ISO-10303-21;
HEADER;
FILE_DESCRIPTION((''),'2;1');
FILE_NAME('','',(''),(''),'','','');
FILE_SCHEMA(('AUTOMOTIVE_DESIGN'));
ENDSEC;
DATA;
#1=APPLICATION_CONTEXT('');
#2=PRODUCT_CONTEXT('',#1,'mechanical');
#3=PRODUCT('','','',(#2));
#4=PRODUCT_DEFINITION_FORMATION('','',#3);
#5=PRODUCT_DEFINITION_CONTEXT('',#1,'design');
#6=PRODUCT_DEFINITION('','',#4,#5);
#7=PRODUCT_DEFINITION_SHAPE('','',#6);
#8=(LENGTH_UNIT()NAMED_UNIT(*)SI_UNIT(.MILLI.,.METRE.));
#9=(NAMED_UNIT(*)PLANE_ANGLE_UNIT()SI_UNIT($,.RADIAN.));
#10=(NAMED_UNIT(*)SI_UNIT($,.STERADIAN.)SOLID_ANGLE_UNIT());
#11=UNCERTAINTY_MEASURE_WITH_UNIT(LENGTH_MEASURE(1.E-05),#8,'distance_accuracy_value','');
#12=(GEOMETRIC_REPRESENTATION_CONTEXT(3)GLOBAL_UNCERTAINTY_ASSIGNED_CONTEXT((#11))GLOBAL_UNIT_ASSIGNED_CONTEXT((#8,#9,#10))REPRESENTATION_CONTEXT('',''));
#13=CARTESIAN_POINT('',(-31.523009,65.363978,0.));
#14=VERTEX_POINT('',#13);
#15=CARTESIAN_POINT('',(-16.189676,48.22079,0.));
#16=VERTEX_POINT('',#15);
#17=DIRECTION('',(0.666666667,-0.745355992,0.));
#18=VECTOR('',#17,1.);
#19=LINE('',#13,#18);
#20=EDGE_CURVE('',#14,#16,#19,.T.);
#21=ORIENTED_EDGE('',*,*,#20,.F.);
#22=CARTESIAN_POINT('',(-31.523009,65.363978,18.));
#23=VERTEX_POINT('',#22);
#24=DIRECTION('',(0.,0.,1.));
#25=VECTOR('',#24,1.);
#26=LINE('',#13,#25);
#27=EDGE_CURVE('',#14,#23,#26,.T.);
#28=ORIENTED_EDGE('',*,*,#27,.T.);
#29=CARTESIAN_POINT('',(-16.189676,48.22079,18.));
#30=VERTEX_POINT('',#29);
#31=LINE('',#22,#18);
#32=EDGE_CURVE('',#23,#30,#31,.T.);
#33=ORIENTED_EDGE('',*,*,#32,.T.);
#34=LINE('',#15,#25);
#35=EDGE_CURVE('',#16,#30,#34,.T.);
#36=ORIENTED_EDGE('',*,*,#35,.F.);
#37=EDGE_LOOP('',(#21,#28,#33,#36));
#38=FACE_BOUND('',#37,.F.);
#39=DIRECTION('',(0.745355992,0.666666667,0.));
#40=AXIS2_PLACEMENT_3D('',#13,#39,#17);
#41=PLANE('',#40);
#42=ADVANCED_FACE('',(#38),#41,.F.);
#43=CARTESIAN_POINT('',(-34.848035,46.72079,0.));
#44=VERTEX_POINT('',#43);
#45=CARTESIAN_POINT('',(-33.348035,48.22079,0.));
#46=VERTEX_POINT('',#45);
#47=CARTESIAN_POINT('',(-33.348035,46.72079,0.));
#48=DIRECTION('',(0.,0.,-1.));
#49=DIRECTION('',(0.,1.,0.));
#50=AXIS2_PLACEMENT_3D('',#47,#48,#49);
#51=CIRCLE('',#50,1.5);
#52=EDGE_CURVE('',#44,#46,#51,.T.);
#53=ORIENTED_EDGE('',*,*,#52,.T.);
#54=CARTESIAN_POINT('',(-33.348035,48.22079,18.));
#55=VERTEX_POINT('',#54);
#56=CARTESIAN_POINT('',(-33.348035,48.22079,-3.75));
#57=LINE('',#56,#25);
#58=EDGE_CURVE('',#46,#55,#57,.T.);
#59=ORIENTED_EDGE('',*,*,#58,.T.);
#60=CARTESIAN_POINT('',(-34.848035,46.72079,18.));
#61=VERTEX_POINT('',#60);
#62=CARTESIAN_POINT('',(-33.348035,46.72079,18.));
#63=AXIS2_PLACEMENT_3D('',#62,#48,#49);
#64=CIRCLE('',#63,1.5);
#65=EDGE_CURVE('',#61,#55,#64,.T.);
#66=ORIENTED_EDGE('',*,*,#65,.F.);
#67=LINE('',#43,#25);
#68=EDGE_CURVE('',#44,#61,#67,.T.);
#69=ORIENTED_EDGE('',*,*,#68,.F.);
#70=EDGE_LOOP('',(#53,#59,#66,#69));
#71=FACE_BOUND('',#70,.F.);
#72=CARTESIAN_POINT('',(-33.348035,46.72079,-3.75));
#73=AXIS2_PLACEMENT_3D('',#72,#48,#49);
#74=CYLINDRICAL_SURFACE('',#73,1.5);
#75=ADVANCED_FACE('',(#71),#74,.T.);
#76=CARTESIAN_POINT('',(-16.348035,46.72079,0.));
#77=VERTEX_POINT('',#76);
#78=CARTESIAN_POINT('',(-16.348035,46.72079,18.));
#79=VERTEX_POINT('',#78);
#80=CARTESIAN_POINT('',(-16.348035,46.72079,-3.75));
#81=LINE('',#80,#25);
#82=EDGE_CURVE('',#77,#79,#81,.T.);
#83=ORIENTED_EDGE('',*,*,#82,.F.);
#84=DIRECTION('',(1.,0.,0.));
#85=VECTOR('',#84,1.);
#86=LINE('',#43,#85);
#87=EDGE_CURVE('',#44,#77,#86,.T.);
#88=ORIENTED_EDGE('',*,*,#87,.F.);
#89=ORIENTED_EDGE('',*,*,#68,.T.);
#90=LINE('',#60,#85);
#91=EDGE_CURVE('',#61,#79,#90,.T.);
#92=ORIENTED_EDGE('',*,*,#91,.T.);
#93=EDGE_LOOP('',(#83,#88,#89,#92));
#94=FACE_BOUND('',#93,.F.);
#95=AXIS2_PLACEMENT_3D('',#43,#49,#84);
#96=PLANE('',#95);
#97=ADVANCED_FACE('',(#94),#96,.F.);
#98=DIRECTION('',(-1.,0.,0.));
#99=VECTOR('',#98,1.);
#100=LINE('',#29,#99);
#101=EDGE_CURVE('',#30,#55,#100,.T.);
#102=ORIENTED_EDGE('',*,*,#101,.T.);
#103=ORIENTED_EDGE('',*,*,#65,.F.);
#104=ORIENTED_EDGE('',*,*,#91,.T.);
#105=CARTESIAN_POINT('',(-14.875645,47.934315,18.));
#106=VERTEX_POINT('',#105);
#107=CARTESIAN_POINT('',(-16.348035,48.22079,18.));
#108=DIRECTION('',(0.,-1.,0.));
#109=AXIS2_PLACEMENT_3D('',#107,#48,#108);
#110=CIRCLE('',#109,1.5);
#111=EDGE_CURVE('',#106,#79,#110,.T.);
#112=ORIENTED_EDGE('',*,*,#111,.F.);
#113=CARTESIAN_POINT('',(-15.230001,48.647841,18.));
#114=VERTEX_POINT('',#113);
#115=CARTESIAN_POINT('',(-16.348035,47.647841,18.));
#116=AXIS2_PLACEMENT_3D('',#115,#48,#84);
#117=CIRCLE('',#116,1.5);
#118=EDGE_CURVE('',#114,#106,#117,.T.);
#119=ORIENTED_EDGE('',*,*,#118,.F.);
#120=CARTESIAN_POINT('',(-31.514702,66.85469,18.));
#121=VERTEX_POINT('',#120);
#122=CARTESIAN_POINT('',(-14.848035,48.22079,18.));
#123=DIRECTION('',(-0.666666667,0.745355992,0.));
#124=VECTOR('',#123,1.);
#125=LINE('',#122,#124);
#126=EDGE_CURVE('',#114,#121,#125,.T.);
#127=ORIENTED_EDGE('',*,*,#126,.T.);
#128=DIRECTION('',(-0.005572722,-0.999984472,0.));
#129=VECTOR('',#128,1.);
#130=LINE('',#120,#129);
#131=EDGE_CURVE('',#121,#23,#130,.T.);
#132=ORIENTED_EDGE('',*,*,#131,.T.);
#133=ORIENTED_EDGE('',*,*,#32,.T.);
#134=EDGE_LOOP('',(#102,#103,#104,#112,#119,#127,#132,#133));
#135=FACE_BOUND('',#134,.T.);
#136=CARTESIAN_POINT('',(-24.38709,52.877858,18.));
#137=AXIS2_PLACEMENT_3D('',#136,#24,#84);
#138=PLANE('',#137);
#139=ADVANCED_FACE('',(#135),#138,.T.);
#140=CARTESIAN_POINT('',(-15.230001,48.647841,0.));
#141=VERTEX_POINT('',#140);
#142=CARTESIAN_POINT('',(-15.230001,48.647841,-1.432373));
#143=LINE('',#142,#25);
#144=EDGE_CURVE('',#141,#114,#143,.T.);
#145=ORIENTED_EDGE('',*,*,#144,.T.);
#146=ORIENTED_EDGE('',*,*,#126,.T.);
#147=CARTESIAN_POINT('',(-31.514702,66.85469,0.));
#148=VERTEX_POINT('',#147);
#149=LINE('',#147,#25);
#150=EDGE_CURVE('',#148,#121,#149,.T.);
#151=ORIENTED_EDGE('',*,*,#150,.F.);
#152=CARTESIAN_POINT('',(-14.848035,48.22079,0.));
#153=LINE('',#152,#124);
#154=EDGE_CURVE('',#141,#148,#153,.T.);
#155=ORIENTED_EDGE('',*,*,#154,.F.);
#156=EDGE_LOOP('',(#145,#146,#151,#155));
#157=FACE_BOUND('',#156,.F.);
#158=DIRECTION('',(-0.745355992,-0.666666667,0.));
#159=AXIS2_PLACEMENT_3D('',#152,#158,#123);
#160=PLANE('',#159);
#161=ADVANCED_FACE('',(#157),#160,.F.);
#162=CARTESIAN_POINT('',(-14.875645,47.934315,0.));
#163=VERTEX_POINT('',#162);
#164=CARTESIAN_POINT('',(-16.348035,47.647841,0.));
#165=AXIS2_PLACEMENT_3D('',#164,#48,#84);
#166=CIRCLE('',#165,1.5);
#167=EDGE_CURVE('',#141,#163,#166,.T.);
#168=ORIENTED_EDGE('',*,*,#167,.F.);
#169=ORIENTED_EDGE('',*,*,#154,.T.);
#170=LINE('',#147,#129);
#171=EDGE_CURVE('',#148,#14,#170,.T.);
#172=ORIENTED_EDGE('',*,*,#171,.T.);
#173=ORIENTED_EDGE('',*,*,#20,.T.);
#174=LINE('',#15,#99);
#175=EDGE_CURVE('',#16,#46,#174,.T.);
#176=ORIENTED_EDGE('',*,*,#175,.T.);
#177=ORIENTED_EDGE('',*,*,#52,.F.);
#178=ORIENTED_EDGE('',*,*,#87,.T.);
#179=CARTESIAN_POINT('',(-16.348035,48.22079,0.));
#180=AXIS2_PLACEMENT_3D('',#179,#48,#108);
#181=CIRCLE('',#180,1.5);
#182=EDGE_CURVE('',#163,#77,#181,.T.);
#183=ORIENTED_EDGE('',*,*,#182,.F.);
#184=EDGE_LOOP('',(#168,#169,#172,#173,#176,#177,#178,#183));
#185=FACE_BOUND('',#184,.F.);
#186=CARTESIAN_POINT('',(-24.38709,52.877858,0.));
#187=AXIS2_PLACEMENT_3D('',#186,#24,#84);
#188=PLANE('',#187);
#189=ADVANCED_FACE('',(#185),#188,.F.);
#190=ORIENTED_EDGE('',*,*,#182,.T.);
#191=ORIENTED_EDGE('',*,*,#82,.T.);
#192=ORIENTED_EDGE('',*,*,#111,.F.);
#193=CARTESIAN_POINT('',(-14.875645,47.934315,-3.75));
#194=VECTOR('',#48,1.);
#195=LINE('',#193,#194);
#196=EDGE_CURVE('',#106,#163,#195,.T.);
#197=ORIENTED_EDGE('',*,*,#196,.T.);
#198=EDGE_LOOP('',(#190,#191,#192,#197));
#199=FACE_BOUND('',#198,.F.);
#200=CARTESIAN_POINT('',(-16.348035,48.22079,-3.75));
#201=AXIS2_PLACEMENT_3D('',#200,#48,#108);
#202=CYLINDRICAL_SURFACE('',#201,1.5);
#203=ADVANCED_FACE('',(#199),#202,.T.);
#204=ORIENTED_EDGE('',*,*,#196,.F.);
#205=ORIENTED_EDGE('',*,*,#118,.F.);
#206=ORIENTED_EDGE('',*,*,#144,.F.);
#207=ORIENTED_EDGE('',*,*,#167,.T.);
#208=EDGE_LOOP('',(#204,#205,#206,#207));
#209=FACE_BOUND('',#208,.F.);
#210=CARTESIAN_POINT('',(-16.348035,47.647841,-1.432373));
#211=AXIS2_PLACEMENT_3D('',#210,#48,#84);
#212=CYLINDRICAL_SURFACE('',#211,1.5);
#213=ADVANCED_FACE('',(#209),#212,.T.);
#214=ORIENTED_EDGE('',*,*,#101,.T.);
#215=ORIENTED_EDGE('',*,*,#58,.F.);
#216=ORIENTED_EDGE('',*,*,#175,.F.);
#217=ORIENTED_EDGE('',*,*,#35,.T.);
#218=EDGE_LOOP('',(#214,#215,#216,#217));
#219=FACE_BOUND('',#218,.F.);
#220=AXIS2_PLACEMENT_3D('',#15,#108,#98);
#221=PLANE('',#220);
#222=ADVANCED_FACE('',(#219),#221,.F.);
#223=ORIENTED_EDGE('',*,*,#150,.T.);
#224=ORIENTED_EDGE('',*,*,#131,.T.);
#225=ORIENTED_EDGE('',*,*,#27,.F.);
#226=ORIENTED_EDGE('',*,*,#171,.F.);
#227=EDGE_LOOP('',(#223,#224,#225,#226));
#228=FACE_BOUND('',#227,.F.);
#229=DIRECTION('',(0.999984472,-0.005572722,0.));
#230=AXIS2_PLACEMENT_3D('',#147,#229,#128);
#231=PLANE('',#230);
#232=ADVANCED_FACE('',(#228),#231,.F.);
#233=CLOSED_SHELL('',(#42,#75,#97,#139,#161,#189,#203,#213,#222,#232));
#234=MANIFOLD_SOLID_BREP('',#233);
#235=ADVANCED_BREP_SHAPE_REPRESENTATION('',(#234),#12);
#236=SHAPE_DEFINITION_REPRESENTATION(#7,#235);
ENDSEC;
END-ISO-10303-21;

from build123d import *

# Parameters (mm, degrees)
F1_DEPTH    = 18
F2_T1_DEPTH = 25.5
F2_T3_DEPTH = 20.8647450844


# Not quite as in the source:
# - a fillet or chamfer that OpenCascade refuses, or shapes differently, is made with other operations: its cross-section is extruded or revolved along the edge and cut away or added


with BuildPart() as f1:
    # F0 (on Top) → F1 (new body)
    with BuildSketch(Plane.XY):
        Polygon((-16.1896759786, 48.2207899958), (-34.8480351921, 48.2207899958), (-34.8480351921, 46.7207899958), (-14.8480351921, 46.7207899958), (-14.8480351921, 48.2207899958), (-31.5147018588, 66.8546898083), (-31.523009312, 65.3639778233), align=None)
    extrude(amount=F1_DEPTH)

    # F2: fillet of radius 1.5 on 3 edges, made by hand

    # F2_s2 → F2_t1 (cut)
    with BuildSketch(Plane.XY.offset(-3.75)):
        with BuildLine():
            ThreePointArc((-16.3480351921, 46.7207899958), (-15.2873750203, 47.160129824), (-14.8480351921, 48.2207899958))
            Line((-14.8480351921, 48.2207899958), (-14.8480351921, 46.7207899958))
            Line((-14.8480351921, 46.7207899958), (-16.3480351921, 46.7207899958))
        make_face()
        with BuildLine():
            ThreePointArc((-33.3480351921, 48.2207899958), (-34.4086953639, 47.7814501676), (-34.8480351921, 46.7207899958))
            Line((-34.8480351921, 46.7207899958), (-34.8480351921, 48.2207899958))
            Line((-34.8480351921, 48.2207899958), (-33.3480351921, 48.2207899958))
        make_face()
    extrude(amount=F2_T1_DEPTH, mode=Mode.SUBTRACT)

    # F2_s4 → F2_t3 (cut)
    with BuildSketch(Plane.XY.offset(-1.4323725422)):
        with BuildLine():
            ThreePointArc((-14.8480351921, 47.6478409789), (-14.9467766537, 48.1830741136), (-15.2300012034, 48.6478409789))
            Line((-15.2300012034, 48.6478409789), (-14.8480351921, 48.2207899958))
            Line((-14.8480351921, 48.2207899958), (-14.8480351921, 47.6478409789))
        make_face()
    extrude(amount=F2_T3_DEPTH, mode=Mode.SUBTRACT)


solid = f1.part
